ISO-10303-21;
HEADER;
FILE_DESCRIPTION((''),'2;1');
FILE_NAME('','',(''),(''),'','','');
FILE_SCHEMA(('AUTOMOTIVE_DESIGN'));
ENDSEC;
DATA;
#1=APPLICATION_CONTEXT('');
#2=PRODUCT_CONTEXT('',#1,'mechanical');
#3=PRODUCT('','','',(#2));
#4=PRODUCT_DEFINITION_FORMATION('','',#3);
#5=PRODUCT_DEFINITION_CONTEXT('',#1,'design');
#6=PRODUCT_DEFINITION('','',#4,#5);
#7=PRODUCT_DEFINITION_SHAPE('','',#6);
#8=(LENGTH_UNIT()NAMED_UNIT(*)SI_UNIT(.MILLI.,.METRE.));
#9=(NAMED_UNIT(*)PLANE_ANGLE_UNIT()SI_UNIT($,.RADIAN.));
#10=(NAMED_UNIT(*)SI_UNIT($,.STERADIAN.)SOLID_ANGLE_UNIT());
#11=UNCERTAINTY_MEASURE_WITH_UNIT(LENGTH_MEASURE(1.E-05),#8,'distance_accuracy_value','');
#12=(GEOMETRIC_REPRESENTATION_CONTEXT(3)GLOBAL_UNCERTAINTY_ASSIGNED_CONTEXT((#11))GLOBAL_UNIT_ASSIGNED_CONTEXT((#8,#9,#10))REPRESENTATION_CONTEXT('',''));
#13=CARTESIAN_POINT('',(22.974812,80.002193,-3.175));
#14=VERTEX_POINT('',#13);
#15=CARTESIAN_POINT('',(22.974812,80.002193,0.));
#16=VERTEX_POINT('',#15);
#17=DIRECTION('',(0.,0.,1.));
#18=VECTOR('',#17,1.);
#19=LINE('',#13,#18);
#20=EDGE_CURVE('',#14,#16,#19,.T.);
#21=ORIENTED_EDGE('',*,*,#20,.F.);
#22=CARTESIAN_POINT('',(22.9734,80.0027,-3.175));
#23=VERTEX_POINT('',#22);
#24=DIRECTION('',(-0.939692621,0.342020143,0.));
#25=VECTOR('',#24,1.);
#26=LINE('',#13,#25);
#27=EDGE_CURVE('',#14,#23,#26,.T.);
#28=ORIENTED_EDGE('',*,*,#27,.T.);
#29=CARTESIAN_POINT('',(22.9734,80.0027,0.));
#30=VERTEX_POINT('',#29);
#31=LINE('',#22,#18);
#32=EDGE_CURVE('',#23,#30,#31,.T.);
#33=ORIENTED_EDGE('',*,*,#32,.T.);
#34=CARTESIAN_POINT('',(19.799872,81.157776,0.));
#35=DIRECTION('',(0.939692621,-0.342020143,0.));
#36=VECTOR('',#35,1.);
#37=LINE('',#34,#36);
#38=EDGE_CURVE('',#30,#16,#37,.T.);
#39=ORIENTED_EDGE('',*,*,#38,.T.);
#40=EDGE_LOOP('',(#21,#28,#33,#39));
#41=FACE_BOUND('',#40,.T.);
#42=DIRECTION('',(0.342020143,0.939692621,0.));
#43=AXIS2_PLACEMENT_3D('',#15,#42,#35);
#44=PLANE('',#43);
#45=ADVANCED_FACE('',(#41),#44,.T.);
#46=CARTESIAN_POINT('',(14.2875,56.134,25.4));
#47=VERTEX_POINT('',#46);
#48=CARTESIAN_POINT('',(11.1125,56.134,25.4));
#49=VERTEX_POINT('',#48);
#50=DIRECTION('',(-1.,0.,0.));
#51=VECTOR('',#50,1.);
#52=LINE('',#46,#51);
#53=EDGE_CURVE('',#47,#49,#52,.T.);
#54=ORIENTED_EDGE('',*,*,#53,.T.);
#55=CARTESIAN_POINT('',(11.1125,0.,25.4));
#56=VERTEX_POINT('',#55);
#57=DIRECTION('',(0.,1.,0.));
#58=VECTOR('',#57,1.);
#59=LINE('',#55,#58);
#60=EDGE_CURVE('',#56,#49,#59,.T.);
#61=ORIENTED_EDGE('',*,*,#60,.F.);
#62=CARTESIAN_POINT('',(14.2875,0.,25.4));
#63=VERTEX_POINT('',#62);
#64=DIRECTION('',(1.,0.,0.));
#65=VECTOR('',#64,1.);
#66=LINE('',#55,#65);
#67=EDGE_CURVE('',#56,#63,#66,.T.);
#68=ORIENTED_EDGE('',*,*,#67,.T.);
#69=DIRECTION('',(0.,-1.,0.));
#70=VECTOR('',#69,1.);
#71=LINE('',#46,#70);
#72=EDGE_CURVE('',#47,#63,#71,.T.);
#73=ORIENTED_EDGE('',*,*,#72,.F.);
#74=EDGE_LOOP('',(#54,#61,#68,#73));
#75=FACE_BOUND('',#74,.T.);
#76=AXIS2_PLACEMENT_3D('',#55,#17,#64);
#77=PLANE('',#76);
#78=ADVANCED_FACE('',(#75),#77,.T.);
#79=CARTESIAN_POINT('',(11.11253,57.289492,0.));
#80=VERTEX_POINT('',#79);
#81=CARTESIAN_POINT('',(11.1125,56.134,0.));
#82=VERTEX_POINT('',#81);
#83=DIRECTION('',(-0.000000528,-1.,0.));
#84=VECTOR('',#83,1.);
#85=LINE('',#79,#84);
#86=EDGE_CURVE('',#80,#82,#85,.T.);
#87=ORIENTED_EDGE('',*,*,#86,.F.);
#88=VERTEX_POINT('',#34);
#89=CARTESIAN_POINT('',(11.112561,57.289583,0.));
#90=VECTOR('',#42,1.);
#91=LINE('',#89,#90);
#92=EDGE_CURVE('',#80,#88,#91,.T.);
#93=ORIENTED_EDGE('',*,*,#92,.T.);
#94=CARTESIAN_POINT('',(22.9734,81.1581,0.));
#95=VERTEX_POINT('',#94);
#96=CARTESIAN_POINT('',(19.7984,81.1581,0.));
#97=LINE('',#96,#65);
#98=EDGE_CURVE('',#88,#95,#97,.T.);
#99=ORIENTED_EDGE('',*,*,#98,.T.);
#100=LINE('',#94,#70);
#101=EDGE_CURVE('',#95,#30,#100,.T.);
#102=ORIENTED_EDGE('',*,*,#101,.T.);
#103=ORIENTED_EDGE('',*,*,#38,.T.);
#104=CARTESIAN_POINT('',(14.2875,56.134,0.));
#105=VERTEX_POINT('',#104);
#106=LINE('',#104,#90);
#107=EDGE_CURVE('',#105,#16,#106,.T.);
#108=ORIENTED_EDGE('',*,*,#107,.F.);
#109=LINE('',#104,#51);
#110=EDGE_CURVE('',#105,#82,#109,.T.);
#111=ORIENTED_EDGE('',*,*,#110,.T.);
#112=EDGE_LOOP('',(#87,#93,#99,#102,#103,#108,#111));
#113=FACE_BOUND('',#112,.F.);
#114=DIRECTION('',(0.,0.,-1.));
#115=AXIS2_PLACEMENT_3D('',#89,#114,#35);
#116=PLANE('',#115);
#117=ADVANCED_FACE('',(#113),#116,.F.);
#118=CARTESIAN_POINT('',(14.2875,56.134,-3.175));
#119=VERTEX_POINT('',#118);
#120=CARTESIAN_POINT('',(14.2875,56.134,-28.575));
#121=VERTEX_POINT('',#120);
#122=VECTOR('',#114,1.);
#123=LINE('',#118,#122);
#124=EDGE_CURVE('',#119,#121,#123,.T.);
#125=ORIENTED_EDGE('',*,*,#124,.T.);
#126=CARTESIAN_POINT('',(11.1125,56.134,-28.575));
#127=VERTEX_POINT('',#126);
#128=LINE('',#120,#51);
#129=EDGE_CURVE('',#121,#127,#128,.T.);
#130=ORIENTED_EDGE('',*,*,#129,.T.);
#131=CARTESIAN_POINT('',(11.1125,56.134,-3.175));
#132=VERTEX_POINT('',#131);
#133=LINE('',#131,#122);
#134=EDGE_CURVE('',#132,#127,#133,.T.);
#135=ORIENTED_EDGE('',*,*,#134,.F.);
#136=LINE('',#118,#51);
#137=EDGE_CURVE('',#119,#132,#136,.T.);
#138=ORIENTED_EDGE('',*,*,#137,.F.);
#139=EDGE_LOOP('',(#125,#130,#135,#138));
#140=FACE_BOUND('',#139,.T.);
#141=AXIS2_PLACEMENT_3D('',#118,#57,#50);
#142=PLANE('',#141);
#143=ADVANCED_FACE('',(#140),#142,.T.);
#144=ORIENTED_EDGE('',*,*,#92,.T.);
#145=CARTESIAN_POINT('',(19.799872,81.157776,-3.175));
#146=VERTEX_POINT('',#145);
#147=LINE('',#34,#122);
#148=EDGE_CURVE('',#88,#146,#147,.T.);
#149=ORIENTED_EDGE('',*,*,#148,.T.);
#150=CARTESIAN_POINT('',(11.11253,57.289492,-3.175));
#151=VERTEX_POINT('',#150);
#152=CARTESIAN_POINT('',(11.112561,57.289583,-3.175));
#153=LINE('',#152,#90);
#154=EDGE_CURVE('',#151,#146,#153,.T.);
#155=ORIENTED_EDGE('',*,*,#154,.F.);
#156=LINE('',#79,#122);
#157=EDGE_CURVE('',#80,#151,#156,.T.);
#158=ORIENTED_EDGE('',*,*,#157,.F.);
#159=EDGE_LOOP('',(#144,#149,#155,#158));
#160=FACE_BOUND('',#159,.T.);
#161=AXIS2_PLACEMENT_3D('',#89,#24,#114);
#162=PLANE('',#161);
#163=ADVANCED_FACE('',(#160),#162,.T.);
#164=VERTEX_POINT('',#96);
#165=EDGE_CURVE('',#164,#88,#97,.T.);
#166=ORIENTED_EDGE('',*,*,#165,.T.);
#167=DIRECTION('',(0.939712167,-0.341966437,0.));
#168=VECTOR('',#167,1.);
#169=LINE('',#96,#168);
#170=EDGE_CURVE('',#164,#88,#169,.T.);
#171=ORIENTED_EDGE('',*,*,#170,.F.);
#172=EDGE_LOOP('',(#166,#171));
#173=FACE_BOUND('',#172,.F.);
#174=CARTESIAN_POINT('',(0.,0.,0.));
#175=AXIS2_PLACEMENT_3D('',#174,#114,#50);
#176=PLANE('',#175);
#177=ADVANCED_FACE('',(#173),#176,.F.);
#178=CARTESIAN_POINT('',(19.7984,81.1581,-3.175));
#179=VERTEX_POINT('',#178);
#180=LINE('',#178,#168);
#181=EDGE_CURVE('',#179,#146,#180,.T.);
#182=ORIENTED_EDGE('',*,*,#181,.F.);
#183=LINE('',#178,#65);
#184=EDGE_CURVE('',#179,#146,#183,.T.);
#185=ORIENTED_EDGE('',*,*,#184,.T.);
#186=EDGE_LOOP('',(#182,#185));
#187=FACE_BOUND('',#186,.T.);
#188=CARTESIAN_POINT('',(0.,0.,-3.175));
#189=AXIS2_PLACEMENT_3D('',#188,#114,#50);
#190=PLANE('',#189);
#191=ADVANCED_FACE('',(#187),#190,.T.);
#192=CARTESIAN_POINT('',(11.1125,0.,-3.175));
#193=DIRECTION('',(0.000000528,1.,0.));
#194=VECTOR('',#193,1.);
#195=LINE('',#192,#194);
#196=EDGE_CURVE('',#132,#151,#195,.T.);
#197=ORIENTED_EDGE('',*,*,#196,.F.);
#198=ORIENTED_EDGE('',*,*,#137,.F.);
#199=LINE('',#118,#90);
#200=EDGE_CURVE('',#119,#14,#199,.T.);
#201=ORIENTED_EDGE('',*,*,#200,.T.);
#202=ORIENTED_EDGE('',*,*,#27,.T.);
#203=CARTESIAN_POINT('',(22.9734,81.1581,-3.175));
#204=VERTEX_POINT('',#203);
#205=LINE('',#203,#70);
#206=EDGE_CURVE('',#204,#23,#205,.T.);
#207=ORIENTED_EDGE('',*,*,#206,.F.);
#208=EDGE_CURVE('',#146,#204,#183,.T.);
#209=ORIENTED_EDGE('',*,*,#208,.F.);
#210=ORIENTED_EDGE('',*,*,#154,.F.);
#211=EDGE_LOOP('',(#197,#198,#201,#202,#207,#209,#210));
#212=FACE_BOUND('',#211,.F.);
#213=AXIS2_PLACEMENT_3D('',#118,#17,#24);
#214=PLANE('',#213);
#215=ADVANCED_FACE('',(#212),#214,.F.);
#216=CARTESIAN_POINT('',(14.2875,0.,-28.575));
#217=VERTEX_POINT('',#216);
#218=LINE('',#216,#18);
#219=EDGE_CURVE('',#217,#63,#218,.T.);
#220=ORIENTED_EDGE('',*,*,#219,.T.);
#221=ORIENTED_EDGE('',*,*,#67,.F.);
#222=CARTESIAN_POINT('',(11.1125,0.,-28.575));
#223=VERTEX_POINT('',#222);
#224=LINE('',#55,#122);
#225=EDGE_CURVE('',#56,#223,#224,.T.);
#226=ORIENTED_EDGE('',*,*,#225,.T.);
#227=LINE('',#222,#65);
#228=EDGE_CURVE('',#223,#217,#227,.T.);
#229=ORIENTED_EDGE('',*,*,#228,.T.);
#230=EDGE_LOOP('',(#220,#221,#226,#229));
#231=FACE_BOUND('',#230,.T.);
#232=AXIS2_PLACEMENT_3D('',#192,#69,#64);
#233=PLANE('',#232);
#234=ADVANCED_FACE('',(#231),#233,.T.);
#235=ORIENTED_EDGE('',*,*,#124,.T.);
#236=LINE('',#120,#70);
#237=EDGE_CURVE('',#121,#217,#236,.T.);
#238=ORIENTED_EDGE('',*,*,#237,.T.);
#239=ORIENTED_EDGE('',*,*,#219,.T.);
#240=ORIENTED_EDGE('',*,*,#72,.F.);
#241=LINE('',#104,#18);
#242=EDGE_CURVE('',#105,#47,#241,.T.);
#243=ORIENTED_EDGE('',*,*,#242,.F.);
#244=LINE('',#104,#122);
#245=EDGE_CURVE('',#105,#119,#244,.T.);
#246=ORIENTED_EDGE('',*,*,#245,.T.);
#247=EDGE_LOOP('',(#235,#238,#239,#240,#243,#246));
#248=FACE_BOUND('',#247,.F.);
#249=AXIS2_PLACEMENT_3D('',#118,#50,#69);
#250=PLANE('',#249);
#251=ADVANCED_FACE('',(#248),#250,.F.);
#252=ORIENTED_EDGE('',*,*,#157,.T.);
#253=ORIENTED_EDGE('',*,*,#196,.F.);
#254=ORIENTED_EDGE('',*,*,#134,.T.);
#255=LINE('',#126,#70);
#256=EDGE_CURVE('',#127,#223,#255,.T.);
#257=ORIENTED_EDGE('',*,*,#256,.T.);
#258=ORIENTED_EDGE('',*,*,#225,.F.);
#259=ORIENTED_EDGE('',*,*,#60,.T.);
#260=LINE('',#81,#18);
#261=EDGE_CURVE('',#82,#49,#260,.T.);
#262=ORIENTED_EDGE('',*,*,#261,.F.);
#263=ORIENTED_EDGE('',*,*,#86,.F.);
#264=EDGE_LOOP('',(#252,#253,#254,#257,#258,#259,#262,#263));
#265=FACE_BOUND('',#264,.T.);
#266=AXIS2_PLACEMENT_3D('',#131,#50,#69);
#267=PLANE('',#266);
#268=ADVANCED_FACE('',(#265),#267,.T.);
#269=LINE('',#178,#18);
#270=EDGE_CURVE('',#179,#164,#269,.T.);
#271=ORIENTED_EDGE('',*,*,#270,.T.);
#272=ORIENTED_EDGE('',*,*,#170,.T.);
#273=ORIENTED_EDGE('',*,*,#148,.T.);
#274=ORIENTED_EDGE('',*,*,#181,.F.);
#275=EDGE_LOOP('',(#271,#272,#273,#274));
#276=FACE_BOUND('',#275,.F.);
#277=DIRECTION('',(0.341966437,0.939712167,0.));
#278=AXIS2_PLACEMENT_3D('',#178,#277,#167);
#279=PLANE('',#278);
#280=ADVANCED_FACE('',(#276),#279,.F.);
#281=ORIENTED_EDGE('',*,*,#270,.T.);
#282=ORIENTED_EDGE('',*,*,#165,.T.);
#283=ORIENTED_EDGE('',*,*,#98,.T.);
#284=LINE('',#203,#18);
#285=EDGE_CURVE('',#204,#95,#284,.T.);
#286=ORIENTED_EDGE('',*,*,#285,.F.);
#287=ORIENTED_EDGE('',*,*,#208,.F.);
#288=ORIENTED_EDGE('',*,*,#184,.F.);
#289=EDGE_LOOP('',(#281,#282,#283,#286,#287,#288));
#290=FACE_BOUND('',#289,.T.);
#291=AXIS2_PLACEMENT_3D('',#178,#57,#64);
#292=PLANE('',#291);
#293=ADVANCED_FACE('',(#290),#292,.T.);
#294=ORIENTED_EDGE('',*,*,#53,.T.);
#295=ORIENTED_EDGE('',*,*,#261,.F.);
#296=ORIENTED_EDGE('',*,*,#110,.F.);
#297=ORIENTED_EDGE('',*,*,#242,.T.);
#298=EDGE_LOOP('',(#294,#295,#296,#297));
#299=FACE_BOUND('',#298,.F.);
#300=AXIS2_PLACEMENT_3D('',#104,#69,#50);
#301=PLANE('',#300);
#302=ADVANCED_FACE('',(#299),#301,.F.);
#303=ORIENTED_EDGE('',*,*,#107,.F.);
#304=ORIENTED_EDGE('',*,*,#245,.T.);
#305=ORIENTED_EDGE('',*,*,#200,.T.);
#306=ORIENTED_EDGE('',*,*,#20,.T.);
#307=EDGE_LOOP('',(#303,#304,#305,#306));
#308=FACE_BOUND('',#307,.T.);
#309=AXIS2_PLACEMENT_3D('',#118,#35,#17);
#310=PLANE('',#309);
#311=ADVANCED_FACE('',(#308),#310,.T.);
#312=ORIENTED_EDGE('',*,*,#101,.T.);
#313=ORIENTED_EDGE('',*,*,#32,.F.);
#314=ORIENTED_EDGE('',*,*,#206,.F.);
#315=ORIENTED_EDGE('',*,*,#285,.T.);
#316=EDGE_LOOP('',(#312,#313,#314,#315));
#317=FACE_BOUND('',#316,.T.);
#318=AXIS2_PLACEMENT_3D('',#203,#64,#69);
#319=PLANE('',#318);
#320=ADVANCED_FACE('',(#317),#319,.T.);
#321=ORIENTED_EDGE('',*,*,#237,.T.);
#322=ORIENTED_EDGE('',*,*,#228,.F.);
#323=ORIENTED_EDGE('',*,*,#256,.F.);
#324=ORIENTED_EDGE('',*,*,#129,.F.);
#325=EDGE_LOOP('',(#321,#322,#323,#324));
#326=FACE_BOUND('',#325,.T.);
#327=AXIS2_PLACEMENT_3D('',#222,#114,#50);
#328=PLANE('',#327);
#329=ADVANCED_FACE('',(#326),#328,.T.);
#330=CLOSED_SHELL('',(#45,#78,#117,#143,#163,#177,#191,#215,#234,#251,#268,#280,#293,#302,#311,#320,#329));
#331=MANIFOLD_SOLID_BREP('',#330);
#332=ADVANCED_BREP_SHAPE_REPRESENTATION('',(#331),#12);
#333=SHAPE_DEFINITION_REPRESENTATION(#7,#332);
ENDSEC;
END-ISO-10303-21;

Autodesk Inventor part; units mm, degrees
ref_plane "YZ Plane" through (0, 0, 0) normal (1, 0, 0) x (0, 1, 0)
ref_plane "XZ Plane" through (0, 0, 0) normal (0, 1, 0) x (-1, 0, 0)
ref_plane "XY Plane" through (0, 0, 0) normal (0, 0, 1) x (1, 0, 0)
sketch "Sketch1" plane through (0, 0, 0) normal (1, 0, 0) x (0, 1, 0)
  line L0 (0, 0) -> (56.134, 0)
  line L1 (56.134, 0) -> (56.134, -3.175)
  line L2 (56.134, -3.175) -> (0, -3.175)
  line L3 (0, -3.175) -> (0, 0)
  dimension "d0" = 56.134
  dimension "d1" = 3.175
extrude "Extrusion1" add sketch "Sketch1" along normal blind 25.4
sketch "Sketch2" plane through (0, 56.134, 0) normal (0, 1, 0) x (1, 0, 0)
  line L0 (0, 3.175) -> (25.4, 3.175) projected
  line L1 (11.1125, 3.175) -> (11.1125, 0)
  line L2 (14.2875, 0) -> (14.2875, 3.175)
  line L3 (11.1125, 3.175) -> (14.2875, 3.175)
  line L4 (14.2875, 0) -> (11.1125, 0)
  line L5 (0, 3.175) -> (25.4, 3.175) projected
  line L6 (0, 0) -> (0, 3.175) projected
  line L7 (0, 0) -> (25.4, 0) projected
  line L8 (25.4, 3.175) -> (25.4, 0) projected
  line L9 (0, 3.175) -> (25.4, 3.175) projected
  line L10 (14.2875, 0) -> (11.1125, 0)
sketch "Sketch3" plane through (0, 0, 0) normal (0, 0, 1) x (1, 0, 0)
  line L0 (14.2875, 56.134) -> (11.1125, 57.2894)
  line L1 (11.1125, 57.2894) -> (11.1125, 56.134)
  line L2 (0, 56.134) -> (25.4, 56.134) projected
  point P0 (0, 0)
extrude "Extrusion2" add sketch "Sketch3" against normal blind 3.175
sketch "Sketch4" plane through (14.2875, 56.134, 0) normal (0.341963, 0.9397134, 0) x (0.9397134, -0.341963, 0)
  line L0 (0, 3.175) -> (0, 0) projected
  line L1 (-3.3787, 0) -> (-3.3787, 3.175) projected
  line L2 (0, 3.175) -> (-3.3787, 3.175)
  line L3 (-3.3787, 3.175) -> (-3.3787, 0)
  line L4 (-3.3787, 0) -> (0, 0)
  line L5 (0, 0) -> (0, 3.175)
  point P0 (5.7696, 0)
extrude "Extrusion3" add sketch "Sketch4" along normal blind 25.4
sketch "Sketch5" plane through (22.9734, 80.0027, 0) normal (0.341963, 0.9397134, 0) x (0.9397134, -0.341963, 0)
  point P0 (5.7696, 0)
sketch "Sketch6" plane through (0, 0, -3.175) normal (0, 0, -1) x (-1, 0, 0)
  line L0 (-19.7984, 81.1581) -> (-22.9734, 80.0027) projected
  line L1 (-19.7984, 81.1581) -> (-22.9734, 81.1581)
  line L2 (-22.9734, 81.1581) -> (-22.9734, 80.0027)
  point P0 (0, 0)
extrude "Extrusion4" add sketch "Sketch6" against normal blind 3.175
sketch "Sketch7" plane through (0, 0, 0) normal (0, 0, 1) x (1, 0, 0)
  line L0 (0, 56.134) -> (11.1125, 56.134) projected
  line L1 (11.1125, 56.134) -> (11.1125, 0)
  line L2 (0, 0) -> (25.4, 0) projected
  line L3 (11.1125, 0) -> (0, 0)
  line L4 (0, 0) -> (0, 56.134) projected
  line L5 (0, 0) -> (0, 56.134)
  line L6 (14.2875, 56.134) -> (25.4, 56.134) projected
  line L7 (14.2875, 56.134) -> (14.2875, 0)
  line L8 (25.4, 56.134) -> (25.4, 0) projected
  line L9 (25.4, 0) -> (25.4, 56.134)
extrude "Extrusion5" cut sketch "Sketch7" against normal blind 25.4
sketch "Sketch8" plane through (11.1125, 0, 0) normal (0, 0, 1) x (1, 0, 0)
  line L0 (3.175, 56.134) -> (11.8609, 80.0027) projected
  line L1 (3.175, 56.134) -> (0, 56.134)
  line L2 (0, 0) -> (0, 57.2894) projected
  line L3 (0, 0) -> (3.175, 0) projected
  line L4 (3.175, 0) -> (0, 0)
  line L5 (3.175, 56.134) -> (3.175, 0)
  point P0 (-11.1125, 0)
extrude "Extrusion6" add sketch "Sketch8" along normal blind 25.4
sketch "Sketch9" plane through (11.1125, 0, -3.175) normal (0, 0, -1) x (-1, 0, 0)
  line L0 (0, 0) -> (-3.175, 0) projected
  line L1 (-3.175, 56.134) -> (-3.175, 0) projected
  line L2 (0, 0) -> (-3.175, 0)
  line L3 (-3.175, 0) -> (-3.175, 56.134)
  line L4 (-3.175, 56.134) -> (0, 56.134)
  line L5 (0, 56.134) -> (0, 0)
  point P0 (11.1125, 0)
extrude "Extrusion7" add sketch "Sketch9" along normal blind 25.4
properties part number "ClawPaddle"
